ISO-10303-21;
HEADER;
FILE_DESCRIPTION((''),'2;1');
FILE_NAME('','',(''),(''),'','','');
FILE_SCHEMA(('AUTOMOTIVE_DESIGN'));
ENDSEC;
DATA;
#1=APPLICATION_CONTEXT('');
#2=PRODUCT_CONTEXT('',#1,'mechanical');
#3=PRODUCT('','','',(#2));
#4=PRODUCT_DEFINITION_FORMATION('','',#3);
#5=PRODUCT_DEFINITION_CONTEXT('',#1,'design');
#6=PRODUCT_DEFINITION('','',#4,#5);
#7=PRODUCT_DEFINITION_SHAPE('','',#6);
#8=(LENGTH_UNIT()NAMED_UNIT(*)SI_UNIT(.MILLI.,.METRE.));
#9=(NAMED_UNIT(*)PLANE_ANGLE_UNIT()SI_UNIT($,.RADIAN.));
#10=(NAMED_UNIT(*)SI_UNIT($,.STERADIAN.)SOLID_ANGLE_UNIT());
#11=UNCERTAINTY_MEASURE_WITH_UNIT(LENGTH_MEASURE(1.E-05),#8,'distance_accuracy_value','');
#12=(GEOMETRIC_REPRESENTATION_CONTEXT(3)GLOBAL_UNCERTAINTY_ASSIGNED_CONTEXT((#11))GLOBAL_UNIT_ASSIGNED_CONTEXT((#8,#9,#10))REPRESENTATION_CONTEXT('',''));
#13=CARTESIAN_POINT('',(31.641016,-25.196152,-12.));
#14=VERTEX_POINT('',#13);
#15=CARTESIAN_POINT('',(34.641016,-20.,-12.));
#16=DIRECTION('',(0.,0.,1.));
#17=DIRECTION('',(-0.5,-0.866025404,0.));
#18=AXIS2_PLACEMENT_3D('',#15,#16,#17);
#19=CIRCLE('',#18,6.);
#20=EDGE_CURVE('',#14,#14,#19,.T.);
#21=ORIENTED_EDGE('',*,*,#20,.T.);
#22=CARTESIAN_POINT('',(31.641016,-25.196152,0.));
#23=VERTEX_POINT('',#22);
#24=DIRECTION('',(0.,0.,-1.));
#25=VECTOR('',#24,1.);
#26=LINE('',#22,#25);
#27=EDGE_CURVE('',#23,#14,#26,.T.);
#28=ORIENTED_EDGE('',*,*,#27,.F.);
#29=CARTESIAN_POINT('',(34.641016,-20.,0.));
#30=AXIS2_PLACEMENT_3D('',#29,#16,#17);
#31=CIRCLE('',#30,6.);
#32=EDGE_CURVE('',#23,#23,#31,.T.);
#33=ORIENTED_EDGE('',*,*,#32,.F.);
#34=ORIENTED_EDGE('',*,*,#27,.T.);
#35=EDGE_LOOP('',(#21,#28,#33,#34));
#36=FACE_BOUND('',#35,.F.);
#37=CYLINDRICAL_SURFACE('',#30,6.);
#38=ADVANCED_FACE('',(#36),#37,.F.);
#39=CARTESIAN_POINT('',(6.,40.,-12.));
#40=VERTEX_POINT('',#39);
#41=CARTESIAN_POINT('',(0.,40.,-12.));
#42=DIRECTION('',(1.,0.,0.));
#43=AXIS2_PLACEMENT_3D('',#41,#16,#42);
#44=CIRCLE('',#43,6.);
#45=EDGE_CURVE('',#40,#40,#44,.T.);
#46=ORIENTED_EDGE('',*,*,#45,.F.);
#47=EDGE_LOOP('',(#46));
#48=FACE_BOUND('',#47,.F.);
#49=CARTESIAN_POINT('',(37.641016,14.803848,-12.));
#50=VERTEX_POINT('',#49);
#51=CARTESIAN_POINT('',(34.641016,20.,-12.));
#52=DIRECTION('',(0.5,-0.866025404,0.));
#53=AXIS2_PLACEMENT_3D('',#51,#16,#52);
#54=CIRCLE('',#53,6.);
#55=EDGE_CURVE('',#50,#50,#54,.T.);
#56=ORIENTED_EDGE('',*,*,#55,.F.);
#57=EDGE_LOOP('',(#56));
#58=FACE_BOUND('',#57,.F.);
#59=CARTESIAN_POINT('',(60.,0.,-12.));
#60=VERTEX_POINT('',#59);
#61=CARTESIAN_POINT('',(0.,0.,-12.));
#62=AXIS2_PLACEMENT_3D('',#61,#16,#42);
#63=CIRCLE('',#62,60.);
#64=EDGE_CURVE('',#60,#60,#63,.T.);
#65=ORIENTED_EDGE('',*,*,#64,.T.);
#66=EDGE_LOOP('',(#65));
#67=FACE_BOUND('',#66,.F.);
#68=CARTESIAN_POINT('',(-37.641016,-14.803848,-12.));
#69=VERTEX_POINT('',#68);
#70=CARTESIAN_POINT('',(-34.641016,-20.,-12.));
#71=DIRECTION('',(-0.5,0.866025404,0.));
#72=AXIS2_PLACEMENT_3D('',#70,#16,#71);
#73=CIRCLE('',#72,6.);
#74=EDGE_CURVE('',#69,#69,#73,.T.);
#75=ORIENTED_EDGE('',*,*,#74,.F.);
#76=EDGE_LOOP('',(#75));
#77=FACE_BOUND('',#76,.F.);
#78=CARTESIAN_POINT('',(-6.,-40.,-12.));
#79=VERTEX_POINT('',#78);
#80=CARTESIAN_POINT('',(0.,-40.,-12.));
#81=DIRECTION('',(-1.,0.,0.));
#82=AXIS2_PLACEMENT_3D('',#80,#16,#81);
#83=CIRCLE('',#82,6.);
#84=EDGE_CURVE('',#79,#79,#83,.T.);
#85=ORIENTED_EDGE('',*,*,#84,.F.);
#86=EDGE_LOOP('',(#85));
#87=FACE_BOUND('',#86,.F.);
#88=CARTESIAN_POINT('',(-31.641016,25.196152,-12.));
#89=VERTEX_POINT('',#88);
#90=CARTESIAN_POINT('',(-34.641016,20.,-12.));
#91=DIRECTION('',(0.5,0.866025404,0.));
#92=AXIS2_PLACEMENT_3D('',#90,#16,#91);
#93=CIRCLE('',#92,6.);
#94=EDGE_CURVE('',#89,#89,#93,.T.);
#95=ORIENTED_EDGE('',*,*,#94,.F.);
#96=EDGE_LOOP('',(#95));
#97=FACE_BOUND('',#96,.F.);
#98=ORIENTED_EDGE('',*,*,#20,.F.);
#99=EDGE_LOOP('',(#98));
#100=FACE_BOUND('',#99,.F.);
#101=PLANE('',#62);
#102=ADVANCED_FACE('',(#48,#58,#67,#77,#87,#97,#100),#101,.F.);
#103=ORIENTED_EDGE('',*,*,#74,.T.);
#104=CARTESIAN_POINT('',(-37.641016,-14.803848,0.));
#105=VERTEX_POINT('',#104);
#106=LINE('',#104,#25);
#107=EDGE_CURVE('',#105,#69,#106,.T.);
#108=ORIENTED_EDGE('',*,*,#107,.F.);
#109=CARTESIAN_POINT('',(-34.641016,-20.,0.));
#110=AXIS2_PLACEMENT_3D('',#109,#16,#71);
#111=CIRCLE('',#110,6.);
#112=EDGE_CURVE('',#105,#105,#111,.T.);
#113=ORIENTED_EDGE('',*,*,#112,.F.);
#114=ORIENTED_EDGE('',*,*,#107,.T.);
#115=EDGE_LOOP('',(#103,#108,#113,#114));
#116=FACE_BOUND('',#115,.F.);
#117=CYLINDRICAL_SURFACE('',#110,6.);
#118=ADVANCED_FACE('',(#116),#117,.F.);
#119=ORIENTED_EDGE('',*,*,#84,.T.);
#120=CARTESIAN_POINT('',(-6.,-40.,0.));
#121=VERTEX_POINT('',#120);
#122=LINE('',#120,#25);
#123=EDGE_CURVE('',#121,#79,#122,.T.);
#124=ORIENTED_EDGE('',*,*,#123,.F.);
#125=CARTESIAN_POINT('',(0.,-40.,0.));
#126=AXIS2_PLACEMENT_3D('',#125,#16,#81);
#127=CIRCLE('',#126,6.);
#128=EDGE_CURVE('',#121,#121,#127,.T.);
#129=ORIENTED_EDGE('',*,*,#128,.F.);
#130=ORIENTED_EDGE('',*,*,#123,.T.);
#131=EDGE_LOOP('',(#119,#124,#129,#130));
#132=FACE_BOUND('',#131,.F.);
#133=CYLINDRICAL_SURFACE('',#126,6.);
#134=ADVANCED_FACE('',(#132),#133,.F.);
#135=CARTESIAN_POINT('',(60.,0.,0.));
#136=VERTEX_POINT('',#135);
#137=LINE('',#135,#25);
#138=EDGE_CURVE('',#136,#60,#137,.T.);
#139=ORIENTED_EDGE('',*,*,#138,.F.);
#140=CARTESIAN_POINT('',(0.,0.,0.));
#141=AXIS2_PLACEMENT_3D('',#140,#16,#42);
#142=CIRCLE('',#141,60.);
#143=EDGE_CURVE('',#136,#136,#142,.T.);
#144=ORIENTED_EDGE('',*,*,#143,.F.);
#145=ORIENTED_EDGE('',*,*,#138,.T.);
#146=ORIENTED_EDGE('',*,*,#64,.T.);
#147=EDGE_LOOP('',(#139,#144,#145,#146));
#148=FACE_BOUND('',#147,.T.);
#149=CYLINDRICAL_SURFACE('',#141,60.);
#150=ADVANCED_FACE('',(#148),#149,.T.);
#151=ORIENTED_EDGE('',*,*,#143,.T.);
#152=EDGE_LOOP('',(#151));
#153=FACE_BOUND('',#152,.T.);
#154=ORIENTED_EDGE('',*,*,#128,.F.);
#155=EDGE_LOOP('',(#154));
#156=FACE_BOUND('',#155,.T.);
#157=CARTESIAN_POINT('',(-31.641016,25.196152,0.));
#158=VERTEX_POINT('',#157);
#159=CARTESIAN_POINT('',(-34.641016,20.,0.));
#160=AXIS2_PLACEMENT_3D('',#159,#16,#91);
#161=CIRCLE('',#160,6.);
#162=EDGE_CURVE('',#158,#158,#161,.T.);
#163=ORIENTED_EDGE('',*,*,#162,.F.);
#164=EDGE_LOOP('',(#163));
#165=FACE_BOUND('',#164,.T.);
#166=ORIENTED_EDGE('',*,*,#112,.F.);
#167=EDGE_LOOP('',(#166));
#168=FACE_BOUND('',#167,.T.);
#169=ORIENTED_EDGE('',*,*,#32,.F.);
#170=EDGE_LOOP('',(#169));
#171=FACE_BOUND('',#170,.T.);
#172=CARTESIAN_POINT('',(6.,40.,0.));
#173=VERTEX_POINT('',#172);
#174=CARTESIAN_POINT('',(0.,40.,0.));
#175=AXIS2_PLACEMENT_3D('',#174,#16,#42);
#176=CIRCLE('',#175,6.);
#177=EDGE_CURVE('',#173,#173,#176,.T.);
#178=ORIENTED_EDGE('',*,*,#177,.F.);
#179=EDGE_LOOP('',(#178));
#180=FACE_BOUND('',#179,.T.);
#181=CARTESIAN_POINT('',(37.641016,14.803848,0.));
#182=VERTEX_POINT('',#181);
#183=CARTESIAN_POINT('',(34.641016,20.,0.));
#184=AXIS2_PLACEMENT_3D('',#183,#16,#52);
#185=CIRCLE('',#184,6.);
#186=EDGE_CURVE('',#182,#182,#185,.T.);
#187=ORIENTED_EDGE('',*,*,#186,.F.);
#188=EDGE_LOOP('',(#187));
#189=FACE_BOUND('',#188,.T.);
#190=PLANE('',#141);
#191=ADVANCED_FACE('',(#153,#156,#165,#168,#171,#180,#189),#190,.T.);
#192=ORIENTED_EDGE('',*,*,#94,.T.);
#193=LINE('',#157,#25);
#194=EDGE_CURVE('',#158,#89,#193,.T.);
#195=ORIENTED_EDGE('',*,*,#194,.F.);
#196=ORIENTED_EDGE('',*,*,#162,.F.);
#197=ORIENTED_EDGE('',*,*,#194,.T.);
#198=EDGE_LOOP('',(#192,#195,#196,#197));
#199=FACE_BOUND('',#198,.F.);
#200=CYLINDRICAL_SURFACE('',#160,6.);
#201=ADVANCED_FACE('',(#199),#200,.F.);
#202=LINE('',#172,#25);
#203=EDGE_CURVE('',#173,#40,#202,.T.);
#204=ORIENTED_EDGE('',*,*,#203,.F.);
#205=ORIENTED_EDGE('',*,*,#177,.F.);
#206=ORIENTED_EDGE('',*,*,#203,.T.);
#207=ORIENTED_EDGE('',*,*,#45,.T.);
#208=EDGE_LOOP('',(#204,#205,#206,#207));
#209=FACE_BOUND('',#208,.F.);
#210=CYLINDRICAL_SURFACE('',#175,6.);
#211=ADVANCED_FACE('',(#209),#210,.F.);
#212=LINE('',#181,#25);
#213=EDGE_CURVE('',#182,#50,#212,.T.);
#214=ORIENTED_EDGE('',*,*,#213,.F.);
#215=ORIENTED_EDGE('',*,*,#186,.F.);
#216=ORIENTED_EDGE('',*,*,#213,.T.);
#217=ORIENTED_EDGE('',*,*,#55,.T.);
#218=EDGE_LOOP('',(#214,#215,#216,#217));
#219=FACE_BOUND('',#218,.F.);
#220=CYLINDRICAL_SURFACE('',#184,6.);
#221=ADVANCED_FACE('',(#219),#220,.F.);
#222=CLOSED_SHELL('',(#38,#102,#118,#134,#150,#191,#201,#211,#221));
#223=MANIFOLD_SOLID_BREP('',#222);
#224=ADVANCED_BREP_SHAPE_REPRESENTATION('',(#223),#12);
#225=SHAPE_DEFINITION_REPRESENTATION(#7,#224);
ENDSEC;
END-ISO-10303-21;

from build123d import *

# Parameters (mm, degrees)
F2_R            = 60
F3_DEPTH        = 12
F4_R            = 6
F5_DEPTH        = 12.001
F5_COPIES_COUNT = 6


# Not quite as in the source:
# - a pattern or mirror of a feature is missing from the dataset's text; its kind, count and spacing are read off the source's solid


with BuildPart() as f3:
    # F2 (on Top) → F3 (new body)
    with BuildSketch(Plane.XY):
        Circle(F2_R)
    extrude(amount=-F3_DEPTH)

    # F4 (on face) → F5 (cut, through all)
    with BuildSketch(Plane.XY):
        with Locations((0, 40)):
            Circle(F4_R)
    f5 = extrude(amount=-F5_DEPTH, mode=Mode.SUBTRACT)

    # F5_copies: F5 ×6 about axis
    f5_copies_axis = Axis((0, 0, 0), (0, 0, 1))
    for i in range(1, F5_COPIES_COUNT):
        add(f5.rotate(f5_copies_axis, i * 360 / F5_COPIES_COUNT), mode=Mode.SUBTRACT)


solid = f3.part
